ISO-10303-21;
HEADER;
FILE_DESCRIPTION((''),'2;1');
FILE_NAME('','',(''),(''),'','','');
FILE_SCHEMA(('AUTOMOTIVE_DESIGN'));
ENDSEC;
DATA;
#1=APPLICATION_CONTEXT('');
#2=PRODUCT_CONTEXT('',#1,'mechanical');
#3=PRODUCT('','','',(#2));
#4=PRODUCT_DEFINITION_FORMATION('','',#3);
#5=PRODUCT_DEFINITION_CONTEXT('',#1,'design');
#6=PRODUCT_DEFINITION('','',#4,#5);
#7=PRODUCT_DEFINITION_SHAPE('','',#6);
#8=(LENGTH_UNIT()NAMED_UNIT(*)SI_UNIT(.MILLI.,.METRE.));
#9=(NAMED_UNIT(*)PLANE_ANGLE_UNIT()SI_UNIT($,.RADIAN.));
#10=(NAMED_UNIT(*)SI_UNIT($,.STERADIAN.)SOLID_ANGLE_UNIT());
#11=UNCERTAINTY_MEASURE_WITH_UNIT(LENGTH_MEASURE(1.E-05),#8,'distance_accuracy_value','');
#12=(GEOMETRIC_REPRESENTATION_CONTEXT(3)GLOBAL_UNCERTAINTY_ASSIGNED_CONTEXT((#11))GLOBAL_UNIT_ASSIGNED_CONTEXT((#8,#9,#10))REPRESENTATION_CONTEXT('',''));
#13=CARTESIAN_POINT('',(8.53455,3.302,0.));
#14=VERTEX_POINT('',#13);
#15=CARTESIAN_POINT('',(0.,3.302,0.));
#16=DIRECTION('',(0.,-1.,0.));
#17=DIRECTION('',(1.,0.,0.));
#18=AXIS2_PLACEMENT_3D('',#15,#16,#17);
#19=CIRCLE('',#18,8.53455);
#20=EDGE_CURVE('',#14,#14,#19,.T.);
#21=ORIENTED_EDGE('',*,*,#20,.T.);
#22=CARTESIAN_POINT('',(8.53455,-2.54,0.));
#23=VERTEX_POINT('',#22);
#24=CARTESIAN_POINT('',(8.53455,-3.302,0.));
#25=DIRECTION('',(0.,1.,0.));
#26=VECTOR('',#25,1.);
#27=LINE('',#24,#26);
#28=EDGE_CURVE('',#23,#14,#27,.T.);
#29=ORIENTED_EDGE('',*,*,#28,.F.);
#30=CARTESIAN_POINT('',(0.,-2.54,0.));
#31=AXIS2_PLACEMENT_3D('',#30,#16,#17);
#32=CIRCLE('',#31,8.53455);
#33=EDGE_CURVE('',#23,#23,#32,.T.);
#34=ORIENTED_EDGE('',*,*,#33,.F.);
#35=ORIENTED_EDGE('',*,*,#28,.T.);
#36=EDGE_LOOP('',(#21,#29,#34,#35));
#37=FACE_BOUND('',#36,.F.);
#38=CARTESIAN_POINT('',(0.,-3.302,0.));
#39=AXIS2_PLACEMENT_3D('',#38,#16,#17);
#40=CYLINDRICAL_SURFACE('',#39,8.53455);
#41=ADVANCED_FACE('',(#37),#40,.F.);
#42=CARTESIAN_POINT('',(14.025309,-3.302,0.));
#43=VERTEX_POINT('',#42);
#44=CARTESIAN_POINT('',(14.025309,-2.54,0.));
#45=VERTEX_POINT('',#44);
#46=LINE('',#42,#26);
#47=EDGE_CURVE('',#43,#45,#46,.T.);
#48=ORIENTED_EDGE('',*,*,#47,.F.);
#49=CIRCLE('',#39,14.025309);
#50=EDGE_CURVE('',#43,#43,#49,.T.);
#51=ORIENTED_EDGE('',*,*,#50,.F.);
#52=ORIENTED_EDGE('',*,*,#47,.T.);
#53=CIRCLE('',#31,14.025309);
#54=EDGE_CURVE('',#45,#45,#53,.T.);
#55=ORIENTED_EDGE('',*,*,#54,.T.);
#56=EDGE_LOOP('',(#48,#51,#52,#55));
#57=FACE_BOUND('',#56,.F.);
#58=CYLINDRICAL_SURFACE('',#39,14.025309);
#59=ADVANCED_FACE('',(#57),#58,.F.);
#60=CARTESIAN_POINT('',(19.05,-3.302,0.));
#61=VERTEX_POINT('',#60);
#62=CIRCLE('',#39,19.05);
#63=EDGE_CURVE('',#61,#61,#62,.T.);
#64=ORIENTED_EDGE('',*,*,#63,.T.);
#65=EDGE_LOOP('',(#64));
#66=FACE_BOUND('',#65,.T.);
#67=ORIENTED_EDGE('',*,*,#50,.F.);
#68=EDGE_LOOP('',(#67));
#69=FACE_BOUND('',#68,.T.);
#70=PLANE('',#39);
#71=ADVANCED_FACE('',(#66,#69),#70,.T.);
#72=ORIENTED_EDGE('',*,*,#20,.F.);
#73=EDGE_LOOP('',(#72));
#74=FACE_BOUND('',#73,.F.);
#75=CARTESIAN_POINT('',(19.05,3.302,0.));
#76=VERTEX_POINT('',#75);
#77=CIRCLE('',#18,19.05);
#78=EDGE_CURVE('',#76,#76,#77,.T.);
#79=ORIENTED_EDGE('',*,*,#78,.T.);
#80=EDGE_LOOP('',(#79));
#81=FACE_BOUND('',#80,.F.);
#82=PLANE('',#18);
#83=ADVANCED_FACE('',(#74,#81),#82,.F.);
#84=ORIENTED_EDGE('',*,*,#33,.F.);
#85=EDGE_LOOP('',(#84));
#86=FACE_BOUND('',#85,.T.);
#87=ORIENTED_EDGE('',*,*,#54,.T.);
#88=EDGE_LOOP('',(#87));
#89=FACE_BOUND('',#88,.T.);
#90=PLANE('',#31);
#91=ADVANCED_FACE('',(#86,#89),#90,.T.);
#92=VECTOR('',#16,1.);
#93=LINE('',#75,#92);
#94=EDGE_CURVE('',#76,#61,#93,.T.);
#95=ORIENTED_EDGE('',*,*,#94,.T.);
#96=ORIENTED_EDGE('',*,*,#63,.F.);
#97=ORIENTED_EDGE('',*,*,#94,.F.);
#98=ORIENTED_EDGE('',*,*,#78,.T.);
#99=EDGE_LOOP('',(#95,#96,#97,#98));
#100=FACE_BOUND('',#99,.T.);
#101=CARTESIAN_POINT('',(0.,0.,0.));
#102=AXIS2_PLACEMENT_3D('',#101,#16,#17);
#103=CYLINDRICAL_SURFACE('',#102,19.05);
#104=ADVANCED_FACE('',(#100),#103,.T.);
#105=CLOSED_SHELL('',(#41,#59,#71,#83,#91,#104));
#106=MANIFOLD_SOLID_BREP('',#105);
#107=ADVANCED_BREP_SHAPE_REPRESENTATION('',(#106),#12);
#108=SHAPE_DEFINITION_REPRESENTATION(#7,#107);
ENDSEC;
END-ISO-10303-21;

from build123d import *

# Parameters (mm, degrees)
F0_R     = 19.05
F1_DEPTH = 3.302
F2_R     = 8.5345501525
F3_DEPTH = 6.605
F4_R     = 14.0253085835
F4_R_2   = 8.5345501525
F5_DEPTH = 0.762


# Not quite as in the source:
# - a feature names something its author has since deleted; it is built from what else it names


with BuildPart() as f1:
    # F0 (on Front) → F1 (new body, symmetric)
    with BuildSketch(Plane.XZ):
        Circle(F0_R)
    extrude(amount=F1_DEPTH, both=True)

    # F2 (on face) → F3 (cut, through all)
    with BuildSketch(Plane.XZ.offset(3.302)):
        Circle(F2_R)
    extrude(amount=-F3_DEPTH, mode=Mode.SUBTRACT)

    # F4 (on face) → F5 (cut)
    with BuildSketch(Plane.XZ.offset(3.302)):
        Circle(F4_R)
        Circle(F4_R_2, mode=Mode.SUBTRACT)
    extrude(amount=-F5_DEPTH, mode=Mode.SUBTRACT)


solid = f1.part
